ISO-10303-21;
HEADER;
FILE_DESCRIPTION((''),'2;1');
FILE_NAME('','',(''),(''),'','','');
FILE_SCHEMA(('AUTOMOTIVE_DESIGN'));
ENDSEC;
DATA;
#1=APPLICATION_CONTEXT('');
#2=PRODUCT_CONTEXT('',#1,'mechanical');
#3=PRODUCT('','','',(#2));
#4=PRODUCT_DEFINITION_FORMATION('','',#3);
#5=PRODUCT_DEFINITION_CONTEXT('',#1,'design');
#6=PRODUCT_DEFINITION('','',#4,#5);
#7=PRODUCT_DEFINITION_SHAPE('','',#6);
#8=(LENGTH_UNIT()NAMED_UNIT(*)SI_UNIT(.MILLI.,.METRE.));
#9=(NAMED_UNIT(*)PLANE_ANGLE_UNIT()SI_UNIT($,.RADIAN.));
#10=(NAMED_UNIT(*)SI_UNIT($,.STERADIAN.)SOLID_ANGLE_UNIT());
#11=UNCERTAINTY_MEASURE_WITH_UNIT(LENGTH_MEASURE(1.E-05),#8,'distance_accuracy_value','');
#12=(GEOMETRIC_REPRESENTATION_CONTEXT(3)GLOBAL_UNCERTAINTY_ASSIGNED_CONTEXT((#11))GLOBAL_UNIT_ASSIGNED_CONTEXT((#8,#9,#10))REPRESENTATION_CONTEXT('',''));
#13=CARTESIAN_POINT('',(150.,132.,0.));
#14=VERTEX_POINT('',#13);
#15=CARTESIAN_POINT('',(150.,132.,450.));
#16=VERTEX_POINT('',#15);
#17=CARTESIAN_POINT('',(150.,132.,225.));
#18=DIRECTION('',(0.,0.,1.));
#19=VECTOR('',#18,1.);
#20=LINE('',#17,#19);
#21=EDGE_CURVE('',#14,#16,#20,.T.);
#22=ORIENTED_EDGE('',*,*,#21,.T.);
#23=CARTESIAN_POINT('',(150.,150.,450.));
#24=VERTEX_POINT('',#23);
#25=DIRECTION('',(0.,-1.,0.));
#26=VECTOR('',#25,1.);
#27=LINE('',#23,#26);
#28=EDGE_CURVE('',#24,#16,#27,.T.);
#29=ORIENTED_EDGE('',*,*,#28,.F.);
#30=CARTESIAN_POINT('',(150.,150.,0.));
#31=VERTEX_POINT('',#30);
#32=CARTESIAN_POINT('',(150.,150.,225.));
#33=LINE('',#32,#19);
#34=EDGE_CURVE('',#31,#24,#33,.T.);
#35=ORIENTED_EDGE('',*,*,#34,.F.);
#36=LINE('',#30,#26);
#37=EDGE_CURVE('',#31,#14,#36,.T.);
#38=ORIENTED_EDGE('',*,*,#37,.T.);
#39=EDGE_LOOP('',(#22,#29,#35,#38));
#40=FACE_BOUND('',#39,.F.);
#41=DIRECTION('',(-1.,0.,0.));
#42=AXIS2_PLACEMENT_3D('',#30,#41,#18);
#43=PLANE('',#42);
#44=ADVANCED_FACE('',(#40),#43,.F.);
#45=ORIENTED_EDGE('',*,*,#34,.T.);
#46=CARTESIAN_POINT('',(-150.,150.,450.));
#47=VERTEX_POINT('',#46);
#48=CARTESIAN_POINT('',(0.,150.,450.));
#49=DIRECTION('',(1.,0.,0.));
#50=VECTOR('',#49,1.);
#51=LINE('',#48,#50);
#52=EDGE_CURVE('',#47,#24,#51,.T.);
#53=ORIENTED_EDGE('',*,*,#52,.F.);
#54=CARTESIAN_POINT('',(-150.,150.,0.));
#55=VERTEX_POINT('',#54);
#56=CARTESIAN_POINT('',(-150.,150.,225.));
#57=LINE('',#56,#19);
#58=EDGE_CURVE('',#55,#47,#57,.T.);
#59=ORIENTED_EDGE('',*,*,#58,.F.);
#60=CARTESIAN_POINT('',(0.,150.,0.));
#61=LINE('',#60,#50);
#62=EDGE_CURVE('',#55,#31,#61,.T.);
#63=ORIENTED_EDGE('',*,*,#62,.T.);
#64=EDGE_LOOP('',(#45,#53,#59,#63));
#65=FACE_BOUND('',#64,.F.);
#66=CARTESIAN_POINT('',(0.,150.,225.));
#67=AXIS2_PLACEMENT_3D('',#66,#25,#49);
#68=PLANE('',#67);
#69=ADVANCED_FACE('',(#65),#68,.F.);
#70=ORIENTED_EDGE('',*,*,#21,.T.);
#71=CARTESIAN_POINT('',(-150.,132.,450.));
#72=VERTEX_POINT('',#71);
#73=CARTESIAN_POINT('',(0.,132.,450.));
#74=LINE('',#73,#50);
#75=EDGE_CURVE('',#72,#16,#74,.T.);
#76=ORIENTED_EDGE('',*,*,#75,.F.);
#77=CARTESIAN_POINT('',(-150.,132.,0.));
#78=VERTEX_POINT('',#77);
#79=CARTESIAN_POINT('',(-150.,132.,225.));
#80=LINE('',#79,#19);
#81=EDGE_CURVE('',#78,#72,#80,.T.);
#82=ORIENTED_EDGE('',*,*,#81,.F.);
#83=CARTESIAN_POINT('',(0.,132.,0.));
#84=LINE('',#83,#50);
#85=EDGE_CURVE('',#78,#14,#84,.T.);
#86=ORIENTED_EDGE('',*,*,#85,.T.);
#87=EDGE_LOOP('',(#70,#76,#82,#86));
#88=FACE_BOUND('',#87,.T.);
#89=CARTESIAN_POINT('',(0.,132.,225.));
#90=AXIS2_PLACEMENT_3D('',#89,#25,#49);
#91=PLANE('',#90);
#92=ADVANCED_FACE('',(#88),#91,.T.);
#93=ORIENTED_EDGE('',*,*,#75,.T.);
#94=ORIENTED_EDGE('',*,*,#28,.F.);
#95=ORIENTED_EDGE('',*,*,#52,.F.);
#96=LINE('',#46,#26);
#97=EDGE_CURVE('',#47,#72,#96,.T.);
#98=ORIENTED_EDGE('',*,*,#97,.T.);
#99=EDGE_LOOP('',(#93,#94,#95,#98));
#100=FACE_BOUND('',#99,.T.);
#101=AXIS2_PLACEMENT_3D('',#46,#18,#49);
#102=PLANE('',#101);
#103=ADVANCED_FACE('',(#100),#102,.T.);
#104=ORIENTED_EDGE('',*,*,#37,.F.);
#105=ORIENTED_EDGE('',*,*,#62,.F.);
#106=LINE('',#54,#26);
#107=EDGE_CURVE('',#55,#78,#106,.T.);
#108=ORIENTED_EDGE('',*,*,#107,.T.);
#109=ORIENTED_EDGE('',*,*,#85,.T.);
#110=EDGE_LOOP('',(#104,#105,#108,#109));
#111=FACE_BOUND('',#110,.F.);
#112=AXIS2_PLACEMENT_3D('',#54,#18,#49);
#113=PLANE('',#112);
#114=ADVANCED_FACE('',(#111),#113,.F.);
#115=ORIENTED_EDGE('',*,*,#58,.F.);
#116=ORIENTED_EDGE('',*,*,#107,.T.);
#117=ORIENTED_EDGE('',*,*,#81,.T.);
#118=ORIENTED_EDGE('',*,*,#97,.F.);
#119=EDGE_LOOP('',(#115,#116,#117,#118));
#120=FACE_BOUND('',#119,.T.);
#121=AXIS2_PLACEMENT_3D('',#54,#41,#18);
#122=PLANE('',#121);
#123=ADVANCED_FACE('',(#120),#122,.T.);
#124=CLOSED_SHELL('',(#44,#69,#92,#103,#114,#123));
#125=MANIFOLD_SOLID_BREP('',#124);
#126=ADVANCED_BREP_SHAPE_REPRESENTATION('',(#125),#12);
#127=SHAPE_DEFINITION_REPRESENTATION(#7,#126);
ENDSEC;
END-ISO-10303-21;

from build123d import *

# Parameters (mm, degrees)
F1_E0_TOP_W = 300
F1_E0_TOP_H = 450
F2_DEPTH    = 18


with BuildPart() as f2:
    # F1_E0_top (on explicit) → F2 (new body)
    with BuildSketch(Plane(origin=(-150, 150, 0), x_dir=(1, 0, 0), z_dir=(0, -1, 0))):
        with Locations((150, 225)):
            Rectangle(F1_E0_TOP_W, F1_E0_TOP_H)
    extrude(amount=F2_DEPTH)


solid = f2.part
